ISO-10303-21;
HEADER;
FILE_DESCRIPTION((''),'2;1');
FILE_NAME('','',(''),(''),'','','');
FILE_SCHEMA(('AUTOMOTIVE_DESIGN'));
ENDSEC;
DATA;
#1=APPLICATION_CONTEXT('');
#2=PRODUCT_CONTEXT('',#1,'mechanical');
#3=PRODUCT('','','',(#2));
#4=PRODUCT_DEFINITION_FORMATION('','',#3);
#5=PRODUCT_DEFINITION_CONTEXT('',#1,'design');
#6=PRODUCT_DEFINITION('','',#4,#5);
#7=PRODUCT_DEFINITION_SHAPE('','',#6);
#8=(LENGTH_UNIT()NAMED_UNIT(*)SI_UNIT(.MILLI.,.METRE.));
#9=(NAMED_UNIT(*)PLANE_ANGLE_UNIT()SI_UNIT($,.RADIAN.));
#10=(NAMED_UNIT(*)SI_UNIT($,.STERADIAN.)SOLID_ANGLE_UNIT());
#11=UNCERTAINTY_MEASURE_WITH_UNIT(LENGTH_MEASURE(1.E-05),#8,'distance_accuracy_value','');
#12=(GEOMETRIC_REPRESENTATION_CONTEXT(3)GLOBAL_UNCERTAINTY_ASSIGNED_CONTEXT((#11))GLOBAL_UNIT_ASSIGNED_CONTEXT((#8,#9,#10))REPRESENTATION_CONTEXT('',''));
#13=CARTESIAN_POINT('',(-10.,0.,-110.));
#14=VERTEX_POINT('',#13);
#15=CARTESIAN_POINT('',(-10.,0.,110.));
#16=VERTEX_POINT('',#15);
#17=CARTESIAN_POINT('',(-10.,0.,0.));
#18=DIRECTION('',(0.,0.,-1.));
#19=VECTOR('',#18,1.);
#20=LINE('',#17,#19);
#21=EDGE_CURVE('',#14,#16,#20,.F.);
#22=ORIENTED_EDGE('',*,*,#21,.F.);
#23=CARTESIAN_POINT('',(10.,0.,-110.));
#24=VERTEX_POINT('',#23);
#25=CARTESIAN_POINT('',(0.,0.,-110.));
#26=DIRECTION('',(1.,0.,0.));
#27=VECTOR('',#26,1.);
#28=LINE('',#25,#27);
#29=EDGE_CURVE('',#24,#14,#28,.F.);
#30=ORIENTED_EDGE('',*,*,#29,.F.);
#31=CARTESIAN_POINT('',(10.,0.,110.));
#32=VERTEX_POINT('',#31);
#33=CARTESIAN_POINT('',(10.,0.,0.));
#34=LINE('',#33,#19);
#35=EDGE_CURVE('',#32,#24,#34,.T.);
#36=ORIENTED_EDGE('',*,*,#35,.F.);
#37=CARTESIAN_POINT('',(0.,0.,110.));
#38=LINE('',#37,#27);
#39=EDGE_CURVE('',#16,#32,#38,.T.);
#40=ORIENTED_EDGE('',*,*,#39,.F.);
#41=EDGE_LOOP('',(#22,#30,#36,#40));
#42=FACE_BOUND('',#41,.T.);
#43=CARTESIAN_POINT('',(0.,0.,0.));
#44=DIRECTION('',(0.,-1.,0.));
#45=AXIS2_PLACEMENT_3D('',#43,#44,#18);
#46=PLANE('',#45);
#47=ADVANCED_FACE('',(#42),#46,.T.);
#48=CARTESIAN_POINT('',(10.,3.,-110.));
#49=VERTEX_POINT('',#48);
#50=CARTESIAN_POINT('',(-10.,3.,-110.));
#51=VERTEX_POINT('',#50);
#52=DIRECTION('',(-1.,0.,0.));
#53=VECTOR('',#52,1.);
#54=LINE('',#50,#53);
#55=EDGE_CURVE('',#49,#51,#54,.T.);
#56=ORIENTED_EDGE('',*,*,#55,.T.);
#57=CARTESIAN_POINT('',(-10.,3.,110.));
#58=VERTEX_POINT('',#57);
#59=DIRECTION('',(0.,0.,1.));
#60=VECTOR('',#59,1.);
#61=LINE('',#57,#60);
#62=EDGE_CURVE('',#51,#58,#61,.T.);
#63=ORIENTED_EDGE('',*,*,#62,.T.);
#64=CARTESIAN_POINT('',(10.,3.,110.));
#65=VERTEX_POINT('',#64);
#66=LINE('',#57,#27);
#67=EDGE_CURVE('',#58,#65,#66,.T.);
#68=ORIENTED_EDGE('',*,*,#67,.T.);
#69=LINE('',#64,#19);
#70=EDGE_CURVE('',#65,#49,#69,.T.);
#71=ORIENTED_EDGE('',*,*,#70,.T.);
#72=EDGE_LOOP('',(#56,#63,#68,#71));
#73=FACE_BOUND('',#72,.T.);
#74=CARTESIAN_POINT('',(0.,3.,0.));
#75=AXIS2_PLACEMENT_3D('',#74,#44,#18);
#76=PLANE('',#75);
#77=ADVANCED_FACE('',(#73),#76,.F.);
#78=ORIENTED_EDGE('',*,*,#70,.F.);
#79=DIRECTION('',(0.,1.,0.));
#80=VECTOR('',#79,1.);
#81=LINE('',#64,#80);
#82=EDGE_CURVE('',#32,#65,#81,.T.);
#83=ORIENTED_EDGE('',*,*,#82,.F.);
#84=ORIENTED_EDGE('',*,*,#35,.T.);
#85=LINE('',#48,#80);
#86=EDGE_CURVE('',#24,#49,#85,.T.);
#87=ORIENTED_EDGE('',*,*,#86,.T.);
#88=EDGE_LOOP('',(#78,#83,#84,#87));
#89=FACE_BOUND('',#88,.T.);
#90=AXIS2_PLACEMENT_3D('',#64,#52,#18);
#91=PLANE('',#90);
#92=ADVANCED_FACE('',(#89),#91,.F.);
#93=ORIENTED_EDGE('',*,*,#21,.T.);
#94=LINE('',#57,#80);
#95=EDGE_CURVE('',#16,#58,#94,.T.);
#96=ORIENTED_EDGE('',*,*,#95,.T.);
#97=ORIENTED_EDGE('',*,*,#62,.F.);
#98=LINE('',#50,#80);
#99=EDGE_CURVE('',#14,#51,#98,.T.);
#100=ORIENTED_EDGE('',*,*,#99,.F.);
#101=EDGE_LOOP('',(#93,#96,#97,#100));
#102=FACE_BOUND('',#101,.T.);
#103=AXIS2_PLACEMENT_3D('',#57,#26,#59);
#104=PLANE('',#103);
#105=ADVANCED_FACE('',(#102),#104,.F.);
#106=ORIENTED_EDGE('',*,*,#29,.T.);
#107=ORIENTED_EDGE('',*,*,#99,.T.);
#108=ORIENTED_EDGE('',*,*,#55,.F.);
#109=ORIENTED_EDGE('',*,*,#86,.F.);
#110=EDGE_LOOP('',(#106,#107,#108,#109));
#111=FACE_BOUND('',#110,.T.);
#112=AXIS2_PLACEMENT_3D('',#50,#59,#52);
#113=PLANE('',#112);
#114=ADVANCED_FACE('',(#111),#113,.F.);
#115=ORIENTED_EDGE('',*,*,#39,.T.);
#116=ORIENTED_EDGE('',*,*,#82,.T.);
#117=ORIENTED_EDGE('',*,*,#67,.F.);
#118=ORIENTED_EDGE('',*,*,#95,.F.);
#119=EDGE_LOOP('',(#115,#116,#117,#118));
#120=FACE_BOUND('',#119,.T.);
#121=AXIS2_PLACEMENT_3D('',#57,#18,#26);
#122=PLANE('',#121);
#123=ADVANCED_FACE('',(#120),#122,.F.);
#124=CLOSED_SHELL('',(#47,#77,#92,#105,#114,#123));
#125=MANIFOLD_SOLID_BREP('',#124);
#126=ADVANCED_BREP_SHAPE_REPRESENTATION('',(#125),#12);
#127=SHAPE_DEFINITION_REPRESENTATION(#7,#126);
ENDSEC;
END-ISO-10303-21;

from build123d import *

# Parameters (mm, degrees)
SKETCH_1_W      = 20
SKETCH_1_H      = 220
EXTRUDE_1_DEPTH = 3


with BuildPart() as part:
    # Sketch 1 → Бобышка-Вытянуть1 (new body)
    with BuildSketch(Plane(origin=(0, 0, 0), x_dir=(1, 0, 0), z_dir=(0, 1, 0))):
        Rectangle(SKETCH_1_W, SKETCH_1_H)
    extrude(amount=EXTRUDE_1_DEPTH)


solid = part.part
